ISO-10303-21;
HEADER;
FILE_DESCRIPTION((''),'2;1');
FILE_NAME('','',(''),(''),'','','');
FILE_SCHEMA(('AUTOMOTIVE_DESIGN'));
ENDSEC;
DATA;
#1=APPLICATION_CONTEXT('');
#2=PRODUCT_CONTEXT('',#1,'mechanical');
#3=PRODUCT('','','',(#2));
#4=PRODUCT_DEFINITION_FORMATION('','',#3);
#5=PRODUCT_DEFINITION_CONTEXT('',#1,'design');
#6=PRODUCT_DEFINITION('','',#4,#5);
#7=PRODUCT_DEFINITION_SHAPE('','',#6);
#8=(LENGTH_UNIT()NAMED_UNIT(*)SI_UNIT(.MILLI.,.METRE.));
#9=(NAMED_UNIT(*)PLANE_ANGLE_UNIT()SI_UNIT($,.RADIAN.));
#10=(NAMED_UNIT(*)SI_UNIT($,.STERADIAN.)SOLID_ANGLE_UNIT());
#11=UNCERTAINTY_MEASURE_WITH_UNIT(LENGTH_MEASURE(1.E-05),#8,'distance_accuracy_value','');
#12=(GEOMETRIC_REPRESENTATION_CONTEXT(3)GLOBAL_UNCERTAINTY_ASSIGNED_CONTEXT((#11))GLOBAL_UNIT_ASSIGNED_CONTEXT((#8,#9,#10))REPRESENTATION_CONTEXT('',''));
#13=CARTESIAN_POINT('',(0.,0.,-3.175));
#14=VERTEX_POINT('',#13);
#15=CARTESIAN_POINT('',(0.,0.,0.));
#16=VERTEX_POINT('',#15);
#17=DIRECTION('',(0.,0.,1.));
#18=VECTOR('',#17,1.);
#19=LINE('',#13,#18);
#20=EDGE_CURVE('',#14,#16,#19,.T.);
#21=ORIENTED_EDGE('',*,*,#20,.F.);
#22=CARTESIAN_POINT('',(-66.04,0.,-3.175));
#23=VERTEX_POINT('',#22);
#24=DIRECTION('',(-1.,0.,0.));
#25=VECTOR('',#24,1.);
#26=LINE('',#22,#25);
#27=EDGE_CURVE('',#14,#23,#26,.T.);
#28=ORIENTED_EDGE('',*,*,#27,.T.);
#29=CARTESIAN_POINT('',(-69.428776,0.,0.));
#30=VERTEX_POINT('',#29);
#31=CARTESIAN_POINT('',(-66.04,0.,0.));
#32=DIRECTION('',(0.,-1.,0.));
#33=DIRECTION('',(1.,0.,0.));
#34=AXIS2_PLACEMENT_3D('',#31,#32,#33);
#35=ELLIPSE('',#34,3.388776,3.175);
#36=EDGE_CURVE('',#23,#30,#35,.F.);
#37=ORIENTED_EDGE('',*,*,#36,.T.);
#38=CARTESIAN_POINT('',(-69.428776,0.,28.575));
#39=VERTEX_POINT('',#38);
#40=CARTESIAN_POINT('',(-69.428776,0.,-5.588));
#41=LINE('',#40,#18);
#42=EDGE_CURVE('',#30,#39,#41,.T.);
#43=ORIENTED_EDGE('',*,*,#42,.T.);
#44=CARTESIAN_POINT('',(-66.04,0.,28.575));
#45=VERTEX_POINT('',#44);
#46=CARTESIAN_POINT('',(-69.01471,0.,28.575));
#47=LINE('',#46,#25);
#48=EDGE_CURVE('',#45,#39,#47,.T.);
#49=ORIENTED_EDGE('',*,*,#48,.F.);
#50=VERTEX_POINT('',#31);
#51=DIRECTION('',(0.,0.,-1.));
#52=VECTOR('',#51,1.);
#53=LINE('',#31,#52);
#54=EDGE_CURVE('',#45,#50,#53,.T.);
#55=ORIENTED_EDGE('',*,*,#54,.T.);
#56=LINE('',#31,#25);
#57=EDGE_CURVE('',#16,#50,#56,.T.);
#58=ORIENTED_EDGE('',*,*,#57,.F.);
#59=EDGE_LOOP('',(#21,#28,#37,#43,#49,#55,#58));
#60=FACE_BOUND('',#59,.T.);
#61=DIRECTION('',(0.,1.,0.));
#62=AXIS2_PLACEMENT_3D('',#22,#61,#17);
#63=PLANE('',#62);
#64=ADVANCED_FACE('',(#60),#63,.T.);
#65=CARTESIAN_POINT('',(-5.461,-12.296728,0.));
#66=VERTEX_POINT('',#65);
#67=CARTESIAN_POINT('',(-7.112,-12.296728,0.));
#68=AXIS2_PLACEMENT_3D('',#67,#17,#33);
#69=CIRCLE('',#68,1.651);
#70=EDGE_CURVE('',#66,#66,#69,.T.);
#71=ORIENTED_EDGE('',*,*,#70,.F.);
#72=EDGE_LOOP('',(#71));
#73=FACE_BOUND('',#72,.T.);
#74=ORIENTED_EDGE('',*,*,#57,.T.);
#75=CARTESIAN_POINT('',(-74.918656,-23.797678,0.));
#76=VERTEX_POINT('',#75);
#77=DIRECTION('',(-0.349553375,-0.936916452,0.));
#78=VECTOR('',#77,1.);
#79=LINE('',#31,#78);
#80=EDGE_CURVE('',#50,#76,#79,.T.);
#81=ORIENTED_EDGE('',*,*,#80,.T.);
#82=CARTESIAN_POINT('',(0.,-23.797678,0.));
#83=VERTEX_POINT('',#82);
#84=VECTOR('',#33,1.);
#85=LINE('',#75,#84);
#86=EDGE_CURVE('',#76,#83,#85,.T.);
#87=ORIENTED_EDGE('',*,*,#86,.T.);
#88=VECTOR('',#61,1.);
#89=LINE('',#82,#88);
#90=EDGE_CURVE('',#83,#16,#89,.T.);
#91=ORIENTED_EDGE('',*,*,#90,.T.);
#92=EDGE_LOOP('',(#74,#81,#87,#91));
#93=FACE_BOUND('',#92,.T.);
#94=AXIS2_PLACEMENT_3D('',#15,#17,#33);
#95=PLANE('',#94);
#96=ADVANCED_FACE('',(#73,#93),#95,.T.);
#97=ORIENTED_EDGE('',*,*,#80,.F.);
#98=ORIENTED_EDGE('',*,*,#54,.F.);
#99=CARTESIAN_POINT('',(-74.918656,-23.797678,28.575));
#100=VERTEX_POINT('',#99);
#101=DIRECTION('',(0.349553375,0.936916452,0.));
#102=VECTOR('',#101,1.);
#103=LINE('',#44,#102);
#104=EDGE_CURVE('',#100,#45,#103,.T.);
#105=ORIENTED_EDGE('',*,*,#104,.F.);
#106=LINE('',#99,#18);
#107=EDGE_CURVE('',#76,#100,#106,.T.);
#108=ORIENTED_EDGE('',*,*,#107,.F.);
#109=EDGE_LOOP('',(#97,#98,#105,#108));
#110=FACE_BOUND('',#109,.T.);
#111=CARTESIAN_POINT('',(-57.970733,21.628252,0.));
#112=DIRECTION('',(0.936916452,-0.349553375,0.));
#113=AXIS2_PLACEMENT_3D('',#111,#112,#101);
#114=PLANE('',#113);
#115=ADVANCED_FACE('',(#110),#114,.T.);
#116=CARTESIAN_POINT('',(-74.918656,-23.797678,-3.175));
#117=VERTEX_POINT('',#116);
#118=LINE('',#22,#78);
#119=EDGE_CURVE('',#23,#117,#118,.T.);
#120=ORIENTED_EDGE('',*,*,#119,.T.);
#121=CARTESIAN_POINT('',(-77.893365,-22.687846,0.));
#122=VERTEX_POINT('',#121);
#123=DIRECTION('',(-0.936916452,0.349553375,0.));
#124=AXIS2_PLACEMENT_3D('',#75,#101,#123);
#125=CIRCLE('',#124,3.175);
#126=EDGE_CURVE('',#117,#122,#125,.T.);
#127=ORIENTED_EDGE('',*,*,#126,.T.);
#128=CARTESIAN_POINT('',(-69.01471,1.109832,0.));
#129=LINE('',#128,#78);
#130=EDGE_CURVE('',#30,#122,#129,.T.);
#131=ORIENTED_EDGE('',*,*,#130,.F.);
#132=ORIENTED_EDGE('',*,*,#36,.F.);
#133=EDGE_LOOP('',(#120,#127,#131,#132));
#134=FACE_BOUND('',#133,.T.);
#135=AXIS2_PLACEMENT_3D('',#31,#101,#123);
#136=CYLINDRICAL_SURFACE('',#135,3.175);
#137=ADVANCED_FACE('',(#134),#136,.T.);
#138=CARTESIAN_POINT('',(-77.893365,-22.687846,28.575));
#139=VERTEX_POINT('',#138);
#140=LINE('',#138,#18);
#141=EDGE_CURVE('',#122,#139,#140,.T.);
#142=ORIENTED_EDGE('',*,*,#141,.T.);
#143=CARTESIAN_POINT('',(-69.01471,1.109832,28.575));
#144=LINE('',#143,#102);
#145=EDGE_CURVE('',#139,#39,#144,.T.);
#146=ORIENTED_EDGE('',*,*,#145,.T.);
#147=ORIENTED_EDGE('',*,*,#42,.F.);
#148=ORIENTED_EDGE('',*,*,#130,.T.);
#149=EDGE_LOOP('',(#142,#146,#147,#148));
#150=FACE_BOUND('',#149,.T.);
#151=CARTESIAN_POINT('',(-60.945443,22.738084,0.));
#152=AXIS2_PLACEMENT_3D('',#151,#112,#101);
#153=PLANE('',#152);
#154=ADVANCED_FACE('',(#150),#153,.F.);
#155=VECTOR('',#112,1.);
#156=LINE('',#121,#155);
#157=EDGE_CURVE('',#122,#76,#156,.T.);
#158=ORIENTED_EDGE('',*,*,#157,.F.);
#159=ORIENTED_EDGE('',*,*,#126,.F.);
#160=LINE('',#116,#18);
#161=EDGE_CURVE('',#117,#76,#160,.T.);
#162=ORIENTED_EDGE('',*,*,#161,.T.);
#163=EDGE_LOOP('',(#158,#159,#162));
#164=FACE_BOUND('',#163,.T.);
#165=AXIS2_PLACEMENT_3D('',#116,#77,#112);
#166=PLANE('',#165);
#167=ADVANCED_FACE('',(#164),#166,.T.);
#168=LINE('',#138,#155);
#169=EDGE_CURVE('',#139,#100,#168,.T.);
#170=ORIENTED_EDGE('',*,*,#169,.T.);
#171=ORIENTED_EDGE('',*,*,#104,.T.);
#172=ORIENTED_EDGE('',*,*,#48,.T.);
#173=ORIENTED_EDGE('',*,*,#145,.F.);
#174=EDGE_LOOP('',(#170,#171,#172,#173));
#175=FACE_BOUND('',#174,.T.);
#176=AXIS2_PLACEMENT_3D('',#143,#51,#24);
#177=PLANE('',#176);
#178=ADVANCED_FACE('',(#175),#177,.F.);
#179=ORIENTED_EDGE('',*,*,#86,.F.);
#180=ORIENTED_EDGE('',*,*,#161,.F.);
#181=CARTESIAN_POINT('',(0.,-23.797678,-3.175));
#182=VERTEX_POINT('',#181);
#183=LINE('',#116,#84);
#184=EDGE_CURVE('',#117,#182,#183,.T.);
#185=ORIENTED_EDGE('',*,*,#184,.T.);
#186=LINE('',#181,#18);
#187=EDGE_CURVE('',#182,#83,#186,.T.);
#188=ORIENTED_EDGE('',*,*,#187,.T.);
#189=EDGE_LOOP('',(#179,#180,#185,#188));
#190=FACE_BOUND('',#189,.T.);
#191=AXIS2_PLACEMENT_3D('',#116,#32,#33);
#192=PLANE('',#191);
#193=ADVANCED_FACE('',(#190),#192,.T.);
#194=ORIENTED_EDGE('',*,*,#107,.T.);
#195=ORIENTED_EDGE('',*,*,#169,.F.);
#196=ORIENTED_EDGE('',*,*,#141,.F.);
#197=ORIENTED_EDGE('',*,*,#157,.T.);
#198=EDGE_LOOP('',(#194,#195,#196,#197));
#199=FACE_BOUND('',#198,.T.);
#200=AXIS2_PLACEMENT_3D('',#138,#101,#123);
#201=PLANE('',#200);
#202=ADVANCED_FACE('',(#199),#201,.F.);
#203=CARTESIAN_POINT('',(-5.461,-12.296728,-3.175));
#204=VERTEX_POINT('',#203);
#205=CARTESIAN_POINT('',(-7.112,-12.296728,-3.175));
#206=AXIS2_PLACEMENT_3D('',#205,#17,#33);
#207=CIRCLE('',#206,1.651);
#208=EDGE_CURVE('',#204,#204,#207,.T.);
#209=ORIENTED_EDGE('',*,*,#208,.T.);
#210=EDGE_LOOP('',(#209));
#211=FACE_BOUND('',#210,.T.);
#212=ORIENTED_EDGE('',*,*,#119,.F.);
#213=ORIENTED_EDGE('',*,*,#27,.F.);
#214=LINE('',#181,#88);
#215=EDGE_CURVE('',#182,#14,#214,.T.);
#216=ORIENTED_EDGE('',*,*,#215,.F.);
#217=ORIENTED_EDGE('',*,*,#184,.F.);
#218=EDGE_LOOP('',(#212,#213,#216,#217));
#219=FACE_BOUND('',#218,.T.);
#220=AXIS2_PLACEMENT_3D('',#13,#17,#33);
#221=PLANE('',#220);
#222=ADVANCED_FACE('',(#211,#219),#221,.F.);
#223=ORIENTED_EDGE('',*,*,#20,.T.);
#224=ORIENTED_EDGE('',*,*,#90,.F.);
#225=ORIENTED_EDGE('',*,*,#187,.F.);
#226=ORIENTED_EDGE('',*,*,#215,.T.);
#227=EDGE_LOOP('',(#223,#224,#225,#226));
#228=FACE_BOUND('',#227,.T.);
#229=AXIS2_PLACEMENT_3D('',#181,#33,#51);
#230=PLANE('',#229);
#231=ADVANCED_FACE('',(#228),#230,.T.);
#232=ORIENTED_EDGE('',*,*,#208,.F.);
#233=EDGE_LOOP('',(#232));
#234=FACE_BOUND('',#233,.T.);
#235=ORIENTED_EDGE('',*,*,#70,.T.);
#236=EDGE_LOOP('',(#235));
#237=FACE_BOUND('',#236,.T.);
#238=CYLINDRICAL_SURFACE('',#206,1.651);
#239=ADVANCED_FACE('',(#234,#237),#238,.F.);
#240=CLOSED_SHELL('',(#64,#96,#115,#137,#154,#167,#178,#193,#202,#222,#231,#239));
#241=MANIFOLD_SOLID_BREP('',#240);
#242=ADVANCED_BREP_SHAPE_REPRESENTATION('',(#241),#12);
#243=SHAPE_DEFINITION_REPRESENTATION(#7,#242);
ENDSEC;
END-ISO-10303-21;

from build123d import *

# Parameters (mm, degrees)
SKETCH13_R              = 1.651
BASE_FLANGE5_DEPTH      = 3.175
EDGE_FLANGE4_START      = -48.484504913
EDGE_FLANGE4_DEPTH      = 25.4
CUT_EXTRUDE4_DEPTH      = 34.925
CUT_EXTRUDE4_DEPTH_BACK = 5.588


# Read off the part's stored shape, not the designer's step: Edge-Flange4
# Sheet-metal steps are written as plain solids
with BuildPart() as part:
    # Sketch13 → Base-Flange5 (new body)
    with BuildSketch(Plane.XY):
        Polygon((-66.04, 0), (0, 0), (0, -23.797677877), (-74.918655736, -23.797677877), align=None)
        with Locations((-7.112, -12.296727665)):
            Circle(SKETCH13_R, mode=Mode.SUBTRACT)
    extrude(amount=-BASE_FLANGE5_DEPTH)

    # Edge-Flange4 outline → Edge-Flange4 (add)
    with BuildSketch(Plane(origin=(0, 0, 0), x_dir=(0.9369164518419233, -0.34955337542060905, 0), z_dir=(0.34955337542060905, 0.9369164518419232, 0)).offset(EDGE_FLANGE4_START)):
        with BuildLine():
            Line((-61.87396248, -28.575), (-61.87396248, 3.175))
            ThreePointArc((-61.87396248, 3.175), (-64.11902651, 2.24506403), (-65.04896248, 0))
            Line((-65.04896248, 0), (-65.04896248, -28.575))
            Line((-65.04896248, -28.575), (-61.87396248, -28.575))
        make_face()
    extrude(amount=EDGE_FLANGE4_DEPTH)

    # Sketch51 → Cut-Extrude4 (cut, two sides: drawn at the far end of the back side and taken through both)
    with BuildSketch(Plane.XY.offset(-CUT_EXTRUDE4_DEPTH_BACK)):
        Polygon((-66.04, 0), (-69.428776015, 0), (-69.014709735, 1.109831967), align=None)
    extrude(amount=CUT_EXTRUDE4_DEPTH + CUT_EXTRUDE4_DEPTH_BACK, mode=Mode.SUBTRACT)


solid = part.part
